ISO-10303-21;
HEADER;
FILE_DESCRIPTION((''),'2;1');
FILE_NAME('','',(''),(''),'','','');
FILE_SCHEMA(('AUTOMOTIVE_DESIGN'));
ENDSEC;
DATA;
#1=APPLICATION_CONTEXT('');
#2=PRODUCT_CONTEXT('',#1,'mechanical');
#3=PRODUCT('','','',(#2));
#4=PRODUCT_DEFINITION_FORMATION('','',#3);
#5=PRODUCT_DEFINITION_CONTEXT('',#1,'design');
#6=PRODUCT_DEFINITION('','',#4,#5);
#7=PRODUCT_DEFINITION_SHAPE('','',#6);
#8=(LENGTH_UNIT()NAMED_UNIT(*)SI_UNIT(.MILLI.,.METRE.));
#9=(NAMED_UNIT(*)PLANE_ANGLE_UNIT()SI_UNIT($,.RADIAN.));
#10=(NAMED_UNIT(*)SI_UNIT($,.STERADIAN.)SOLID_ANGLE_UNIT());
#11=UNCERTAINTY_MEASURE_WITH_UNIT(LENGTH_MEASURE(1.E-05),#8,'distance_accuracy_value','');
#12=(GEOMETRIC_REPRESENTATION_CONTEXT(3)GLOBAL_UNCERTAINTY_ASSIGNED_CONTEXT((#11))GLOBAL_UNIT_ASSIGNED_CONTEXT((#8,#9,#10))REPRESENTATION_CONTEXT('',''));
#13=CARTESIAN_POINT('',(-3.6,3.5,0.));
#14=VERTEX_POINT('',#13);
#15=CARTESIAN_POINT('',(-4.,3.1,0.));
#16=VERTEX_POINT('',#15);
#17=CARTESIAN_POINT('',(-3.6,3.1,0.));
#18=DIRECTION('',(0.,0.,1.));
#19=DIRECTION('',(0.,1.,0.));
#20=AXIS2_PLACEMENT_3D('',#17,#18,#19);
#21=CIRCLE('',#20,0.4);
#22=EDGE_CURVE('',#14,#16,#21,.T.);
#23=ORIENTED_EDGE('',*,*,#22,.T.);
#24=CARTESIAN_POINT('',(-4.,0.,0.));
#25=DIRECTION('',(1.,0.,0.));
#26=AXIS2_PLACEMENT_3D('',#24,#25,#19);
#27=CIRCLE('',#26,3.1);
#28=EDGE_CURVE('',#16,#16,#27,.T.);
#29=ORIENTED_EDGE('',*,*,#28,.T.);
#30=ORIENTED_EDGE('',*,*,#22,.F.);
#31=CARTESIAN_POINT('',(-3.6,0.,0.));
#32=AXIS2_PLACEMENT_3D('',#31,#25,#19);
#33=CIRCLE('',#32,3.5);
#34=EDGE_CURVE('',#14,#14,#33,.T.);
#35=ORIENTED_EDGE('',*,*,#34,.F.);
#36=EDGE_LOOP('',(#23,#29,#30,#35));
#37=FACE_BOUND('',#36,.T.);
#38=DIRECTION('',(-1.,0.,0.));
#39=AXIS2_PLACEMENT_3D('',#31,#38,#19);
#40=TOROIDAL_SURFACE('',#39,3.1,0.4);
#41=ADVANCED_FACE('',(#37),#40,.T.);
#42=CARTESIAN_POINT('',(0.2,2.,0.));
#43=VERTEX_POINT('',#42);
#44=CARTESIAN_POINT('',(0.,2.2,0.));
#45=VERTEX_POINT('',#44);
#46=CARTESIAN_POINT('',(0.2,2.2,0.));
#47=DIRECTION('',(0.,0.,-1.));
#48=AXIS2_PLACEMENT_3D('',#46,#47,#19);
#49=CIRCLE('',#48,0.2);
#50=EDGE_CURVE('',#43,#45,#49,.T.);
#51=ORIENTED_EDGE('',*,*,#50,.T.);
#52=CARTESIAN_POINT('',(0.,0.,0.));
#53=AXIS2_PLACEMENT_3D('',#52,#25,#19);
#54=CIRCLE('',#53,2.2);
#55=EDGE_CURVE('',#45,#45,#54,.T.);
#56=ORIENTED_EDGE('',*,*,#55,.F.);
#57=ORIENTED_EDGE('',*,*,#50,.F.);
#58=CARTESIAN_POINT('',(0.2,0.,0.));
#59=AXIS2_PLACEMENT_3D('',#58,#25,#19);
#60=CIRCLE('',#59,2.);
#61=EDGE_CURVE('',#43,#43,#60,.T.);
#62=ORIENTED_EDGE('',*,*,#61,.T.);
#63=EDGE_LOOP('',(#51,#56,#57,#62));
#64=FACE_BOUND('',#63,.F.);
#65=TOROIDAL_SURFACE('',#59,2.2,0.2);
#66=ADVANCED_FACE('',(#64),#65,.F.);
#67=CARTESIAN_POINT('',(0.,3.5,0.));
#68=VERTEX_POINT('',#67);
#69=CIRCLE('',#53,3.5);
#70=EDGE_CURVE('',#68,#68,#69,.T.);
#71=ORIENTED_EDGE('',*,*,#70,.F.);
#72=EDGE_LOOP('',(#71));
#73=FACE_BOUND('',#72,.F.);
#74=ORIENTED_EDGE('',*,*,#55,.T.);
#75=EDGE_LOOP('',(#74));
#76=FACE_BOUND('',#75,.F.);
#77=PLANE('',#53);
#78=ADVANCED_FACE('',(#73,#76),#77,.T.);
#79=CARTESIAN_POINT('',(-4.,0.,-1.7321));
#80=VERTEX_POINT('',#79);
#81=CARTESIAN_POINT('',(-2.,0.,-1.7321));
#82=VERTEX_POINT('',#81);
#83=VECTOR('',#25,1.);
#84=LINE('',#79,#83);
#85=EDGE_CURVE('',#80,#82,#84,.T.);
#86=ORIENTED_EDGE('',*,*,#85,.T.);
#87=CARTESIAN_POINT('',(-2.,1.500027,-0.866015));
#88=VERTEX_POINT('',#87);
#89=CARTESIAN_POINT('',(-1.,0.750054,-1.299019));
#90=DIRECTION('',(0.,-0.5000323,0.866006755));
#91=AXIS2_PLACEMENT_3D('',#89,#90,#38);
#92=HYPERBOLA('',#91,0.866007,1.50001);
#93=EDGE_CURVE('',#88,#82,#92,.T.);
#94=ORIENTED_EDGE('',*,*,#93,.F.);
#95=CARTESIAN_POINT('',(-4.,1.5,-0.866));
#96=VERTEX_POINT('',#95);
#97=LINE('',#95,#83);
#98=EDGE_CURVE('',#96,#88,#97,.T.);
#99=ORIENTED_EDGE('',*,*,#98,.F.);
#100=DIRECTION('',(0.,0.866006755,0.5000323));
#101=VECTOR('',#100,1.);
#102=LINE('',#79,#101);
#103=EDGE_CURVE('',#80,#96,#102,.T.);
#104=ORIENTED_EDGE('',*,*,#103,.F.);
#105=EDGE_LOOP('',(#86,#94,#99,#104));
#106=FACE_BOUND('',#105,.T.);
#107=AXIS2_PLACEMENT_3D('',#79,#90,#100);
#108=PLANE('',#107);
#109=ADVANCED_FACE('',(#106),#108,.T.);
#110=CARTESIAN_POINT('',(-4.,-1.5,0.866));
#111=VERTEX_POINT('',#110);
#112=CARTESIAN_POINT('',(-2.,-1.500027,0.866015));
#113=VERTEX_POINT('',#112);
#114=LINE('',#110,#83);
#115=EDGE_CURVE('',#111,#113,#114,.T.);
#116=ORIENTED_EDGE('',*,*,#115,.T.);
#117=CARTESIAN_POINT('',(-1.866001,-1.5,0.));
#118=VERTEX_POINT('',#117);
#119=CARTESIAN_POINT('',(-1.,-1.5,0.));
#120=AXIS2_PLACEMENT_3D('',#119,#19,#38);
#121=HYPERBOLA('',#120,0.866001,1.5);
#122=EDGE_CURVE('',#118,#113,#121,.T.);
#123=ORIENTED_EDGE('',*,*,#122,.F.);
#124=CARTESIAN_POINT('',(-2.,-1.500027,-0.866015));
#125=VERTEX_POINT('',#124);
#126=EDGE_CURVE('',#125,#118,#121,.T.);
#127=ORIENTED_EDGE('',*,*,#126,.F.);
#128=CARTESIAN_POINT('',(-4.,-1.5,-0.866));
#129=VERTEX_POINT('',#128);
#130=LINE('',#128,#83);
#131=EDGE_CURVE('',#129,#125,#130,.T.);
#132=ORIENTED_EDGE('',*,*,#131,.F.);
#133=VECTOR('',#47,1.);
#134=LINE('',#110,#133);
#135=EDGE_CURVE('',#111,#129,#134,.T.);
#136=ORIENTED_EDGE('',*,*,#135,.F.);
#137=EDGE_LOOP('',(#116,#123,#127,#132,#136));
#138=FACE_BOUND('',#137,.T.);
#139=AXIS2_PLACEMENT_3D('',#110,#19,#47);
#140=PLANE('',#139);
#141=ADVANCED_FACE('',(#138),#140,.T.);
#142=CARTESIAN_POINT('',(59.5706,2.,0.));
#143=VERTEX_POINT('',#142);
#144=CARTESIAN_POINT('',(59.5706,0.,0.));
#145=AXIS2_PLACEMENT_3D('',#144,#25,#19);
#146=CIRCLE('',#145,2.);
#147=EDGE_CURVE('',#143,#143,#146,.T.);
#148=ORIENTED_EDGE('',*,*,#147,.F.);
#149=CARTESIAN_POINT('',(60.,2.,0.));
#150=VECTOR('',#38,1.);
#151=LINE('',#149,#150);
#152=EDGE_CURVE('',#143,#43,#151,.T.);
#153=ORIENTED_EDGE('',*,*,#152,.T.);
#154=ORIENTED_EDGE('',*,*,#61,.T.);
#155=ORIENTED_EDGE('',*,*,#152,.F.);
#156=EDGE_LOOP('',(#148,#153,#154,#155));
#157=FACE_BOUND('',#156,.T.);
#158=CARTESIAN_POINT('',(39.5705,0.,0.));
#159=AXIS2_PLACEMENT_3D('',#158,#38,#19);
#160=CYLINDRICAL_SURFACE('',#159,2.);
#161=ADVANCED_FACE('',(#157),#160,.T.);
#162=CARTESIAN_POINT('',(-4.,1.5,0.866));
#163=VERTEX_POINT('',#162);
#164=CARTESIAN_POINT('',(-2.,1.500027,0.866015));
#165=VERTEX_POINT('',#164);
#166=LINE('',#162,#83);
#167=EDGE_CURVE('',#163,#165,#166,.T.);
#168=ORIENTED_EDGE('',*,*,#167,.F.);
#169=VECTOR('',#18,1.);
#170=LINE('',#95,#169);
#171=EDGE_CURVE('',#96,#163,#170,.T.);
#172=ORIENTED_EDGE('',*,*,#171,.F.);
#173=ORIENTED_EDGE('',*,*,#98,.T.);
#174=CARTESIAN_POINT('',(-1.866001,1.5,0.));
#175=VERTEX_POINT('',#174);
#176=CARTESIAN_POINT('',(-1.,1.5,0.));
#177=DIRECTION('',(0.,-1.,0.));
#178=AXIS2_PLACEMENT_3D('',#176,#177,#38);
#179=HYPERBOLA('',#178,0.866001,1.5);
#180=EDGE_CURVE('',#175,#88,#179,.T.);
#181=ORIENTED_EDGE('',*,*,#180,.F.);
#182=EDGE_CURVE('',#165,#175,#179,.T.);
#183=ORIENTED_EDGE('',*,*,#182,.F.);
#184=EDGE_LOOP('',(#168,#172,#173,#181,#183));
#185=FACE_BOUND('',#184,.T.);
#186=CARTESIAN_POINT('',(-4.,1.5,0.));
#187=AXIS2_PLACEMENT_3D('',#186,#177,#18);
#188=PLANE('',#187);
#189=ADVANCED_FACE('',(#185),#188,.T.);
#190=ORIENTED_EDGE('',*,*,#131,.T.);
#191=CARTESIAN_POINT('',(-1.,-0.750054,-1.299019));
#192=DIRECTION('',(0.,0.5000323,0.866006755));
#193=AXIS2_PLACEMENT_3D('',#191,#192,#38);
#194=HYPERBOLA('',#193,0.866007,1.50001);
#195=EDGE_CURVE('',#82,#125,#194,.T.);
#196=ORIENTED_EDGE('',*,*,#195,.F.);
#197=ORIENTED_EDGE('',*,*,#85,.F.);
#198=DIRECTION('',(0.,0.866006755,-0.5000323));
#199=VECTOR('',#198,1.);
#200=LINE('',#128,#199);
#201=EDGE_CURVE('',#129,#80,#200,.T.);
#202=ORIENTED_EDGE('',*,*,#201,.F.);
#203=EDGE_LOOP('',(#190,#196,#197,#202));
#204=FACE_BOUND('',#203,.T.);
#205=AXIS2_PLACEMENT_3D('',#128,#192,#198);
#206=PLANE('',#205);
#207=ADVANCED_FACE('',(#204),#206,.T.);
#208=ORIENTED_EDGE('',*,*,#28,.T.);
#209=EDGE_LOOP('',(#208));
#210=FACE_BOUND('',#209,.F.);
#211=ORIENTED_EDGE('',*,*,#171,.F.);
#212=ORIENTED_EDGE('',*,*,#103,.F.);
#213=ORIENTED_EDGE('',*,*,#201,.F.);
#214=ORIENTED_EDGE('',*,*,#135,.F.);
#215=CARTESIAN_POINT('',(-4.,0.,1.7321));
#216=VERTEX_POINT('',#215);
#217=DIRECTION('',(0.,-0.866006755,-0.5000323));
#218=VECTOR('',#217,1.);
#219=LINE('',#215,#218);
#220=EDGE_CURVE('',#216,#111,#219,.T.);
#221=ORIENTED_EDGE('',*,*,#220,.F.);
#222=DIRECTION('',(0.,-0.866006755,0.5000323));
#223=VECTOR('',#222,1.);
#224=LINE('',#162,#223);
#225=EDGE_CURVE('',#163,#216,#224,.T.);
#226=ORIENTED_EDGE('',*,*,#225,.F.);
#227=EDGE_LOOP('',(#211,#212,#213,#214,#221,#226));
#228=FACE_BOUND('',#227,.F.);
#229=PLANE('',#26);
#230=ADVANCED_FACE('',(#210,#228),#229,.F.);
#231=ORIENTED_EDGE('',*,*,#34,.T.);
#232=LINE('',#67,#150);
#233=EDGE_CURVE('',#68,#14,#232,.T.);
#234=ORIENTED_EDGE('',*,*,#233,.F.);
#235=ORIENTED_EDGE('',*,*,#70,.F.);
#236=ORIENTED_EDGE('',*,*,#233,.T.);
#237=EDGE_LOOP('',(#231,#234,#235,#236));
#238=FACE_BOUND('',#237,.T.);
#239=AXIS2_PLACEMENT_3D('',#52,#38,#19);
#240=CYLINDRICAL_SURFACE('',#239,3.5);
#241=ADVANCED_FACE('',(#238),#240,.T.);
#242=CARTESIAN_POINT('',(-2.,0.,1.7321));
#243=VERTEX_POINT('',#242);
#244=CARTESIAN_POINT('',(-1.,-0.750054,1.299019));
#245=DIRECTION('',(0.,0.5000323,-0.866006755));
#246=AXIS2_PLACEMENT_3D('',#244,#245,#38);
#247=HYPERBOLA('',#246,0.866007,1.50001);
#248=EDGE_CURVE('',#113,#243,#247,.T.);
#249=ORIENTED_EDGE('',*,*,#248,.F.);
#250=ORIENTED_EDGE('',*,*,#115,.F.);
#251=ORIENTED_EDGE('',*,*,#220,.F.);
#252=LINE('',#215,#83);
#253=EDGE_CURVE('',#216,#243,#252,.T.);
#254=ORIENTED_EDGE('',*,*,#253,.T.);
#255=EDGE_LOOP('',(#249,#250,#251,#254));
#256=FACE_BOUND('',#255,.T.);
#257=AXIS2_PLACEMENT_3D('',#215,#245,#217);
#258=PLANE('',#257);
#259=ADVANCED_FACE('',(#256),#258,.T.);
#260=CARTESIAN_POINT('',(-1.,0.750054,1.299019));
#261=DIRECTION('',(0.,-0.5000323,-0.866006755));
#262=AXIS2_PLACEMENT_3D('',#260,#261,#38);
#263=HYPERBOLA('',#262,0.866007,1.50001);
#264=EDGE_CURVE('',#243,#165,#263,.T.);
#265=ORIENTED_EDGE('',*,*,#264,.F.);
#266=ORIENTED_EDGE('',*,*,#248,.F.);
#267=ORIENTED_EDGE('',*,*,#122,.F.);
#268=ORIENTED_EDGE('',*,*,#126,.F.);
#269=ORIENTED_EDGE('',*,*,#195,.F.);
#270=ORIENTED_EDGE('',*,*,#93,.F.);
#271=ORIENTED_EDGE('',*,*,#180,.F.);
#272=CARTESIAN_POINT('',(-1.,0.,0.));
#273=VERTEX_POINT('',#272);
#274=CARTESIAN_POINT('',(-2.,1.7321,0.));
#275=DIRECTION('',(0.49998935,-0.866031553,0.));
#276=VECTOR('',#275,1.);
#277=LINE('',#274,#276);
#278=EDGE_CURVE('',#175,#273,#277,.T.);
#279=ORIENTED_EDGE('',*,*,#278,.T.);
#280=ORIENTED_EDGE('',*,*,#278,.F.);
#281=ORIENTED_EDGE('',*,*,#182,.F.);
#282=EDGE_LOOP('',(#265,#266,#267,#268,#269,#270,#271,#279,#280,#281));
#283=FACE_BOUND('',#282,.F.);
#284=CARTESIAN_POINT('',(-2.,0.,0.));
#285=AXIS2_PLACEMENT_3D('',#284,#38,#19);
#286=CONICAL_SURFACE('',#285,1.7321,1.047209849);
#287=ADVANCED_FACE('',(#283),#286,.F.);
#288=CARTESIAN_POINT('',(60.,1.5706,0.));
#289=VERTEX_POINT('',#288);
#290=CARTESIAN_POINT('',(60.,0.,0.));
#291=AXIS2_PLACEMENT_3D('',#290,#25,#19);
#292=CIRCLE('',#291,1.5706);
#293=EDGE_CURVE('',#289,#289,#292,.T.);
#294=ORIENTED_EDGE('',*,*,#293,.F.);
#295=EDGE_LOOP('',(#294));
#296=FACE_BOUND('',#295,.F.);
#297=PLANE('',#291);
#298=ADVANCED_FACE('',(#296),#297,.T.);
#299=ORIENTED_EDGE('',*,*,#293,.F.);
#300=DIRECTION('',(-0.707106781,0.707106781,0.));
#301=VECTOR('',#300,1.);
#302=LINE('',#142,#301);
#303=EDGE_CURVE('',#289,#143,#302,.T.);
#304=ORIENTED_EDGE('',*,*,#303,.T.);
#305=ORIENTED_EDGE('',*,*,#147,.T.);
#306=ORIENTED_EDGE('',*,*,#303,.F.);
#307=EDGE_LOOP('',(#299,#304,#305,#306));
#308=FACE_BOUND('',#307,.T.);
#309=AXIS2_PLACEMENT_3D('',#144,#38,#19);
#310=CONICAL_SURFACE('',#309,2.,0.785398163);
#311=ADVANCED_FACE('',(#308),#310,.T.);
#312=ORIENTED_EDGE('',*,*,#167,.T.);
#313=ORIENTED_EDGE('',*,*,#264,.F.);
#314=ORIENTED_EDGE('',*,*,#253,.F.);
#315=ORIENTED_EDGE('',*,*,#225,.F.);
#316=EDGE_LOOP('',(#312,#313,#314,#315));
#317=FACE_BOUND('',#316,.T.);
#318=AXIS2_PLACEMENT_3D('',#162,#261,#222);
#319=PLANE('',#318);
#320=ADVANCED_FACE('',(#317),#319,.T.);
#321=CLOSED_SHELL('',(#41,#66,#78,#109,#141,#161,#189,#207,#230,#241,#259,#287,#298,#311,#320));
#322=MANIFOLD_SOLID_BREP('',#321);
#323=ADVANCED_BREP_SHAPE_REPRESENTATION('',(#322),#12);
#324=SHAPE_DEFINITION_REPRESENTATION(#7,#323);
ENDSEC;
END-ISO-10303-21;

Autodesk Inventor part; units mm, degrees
ref_plane "YZ Plane" through (0, 0, 0) normal (1, 0, 0) x (0, 1, 0)
ref_plane "XZ Plane" through (0, 0, 0) normal (0, 1, 0) x (-1, 0, 0)
sketch "Sketch1" plane through (0, 0, 0) normal (0, 0, 1) x (1, 0, 0)
  line L0 (-1, 0) -> (60, 0)
  line L1 (60, 0) -> (60, 2)
  line L2 (60, 2) -> (40, 2)
  line L3 (40, 2) -> (39.5705, 2)
  line L4 (39.5705, 2) -> (0, 2)
  line L5 (0, 2) -> (0, 3.5)
  line L6 (0, 3.5) -> (-4, 3.5)
  line L7 (-4, 3.5) -> (-4, 1.7321)
  line L8 (-4, 1.7321) -> (-2, 1.7321)
  line L9 (-2, 1.7321) -> (-1, 0)
  line L10 (-11.8, 0) -> (42.8, 0) projected
  line L11 (0, -0.7) -> (0, 4.2) projected
  line L12 (40, 2) -> (0, 2) construction
  dimension "d1" = 20
  dimension "d2" = 0.4295
  dimension "d3" = 4
  dimension "d4" = 2
  dimension "d5" = 60
  dimension "d6" = 4
  dimension "d7" = 4
  dimension "d8" = 3.4641
  dimension "d9" = 7
  dimension "d26" = 60
revolve "Body" add sketch "Sketch1" angle 360 about axis through (-1, 0, 0) along (1, 0, 0)
sketch "Sketch2" plane through (-4, 0, 0) normal (-1, 0, 0) x (0, 0, 1)
  circle A0 centre (0, 0) radius 1.7321 projected
  line L0 (0, -4.9) -> (0, 4.9) projected
  line L1 (-4.9, 0) -> (4.9, 0) projected
  line L2 (1.7321, 0) -> (0.866, -1.5)
  line L3 (0.866, -1.5) -> (-0.866, -1.5)
  line L4 (-0.866, -1.5) -> (-1.7321, 0)
  line L5 (-1.7321, 0) -> (-0.866, 1.5)
  line L6 (-0.866, 1.5) -> (0.866, 1.5)
  line L7 (0.866, 1.5) -> (1.7321, 0)
extrude "Slot" add sketch "Sketch2" against normal up to next contours L7 A0 | A0 L2 | L6 L0 A0 | A0 L0 L3 | L0 L6 A0 | A0 L3 L0 | L4 A0 | A0 L5
fillet "Fillet1" radius 0.4 1 edges at (-4, -3.5, 0)
thread "Thread" size "M4x0.7" class "6g" standard "ISO Metric profile" length 20
chamfer "Chamfer1" distance 0.4294 distance2 0.4294 1 edges at (60, -2, 0) measured on face at (60, -0.2364, 0.6233)
ref_plane "Work Plane1" through (29, 0, 0) normal (0, -1, 0) x (1, 0, 0)
fillet "Fillet2" radius 0.2 1 edges at (0, -2, 0)
equation "\"d30\" = R"
equation "\"d17\" = RR"
equation "\"d13\" = GEL"
equation "\"d15\" = -0.5 * SPD + 0.5 * GD"
equation "\"d16\" = GUL"
equation "\"d1\" = GEL"
equation "\"d3\" = KOH"
equation "\"d4\" = INTI"
equation "\"d6\" = GD"
equation "\"d7\" = BDM"
equation "\"d8\" = 1.1547 * SW"
equation "\"d9\" = KOD"
equation "\"d26\" = NLG"
equation "\"GD\" = NND"
equation "\"NLG\" = 60"
equation "\"GEL\" = 20"
equation "\"KOD\" = 7"
equation "\"KOH\" = 4"
equation "\"INTI\" = 2"
equation "\"GAL\" = 0.61345 * PTC"
equation "\"GUL\" = 0.61345 * PTC"
equation "\"BDM\" = NND"
equation "\"SW\" = 3"
equation "\"RR\" = 0.4"
equation "\"SPD\" = NND - 1.2269 * PTC"
equation "\"R\" = 0.2"
equation "\"TOA\" = 30deg"
equation "\"GD1\" = THREADDIA - 1.2269 * PTC"
equation "\"THREADDIA\" = 4"
equation "\"FAWI\" = 45deg"
equation "\"ANG\" = 120deg"
equation "\"PTC\" = 0.7"
equation "\"NND\" = 4"
equation "\"E0\" = 1.155 * SW"
properties part number "DIN 912 - M4 x 35" material "Steel, Mild"
